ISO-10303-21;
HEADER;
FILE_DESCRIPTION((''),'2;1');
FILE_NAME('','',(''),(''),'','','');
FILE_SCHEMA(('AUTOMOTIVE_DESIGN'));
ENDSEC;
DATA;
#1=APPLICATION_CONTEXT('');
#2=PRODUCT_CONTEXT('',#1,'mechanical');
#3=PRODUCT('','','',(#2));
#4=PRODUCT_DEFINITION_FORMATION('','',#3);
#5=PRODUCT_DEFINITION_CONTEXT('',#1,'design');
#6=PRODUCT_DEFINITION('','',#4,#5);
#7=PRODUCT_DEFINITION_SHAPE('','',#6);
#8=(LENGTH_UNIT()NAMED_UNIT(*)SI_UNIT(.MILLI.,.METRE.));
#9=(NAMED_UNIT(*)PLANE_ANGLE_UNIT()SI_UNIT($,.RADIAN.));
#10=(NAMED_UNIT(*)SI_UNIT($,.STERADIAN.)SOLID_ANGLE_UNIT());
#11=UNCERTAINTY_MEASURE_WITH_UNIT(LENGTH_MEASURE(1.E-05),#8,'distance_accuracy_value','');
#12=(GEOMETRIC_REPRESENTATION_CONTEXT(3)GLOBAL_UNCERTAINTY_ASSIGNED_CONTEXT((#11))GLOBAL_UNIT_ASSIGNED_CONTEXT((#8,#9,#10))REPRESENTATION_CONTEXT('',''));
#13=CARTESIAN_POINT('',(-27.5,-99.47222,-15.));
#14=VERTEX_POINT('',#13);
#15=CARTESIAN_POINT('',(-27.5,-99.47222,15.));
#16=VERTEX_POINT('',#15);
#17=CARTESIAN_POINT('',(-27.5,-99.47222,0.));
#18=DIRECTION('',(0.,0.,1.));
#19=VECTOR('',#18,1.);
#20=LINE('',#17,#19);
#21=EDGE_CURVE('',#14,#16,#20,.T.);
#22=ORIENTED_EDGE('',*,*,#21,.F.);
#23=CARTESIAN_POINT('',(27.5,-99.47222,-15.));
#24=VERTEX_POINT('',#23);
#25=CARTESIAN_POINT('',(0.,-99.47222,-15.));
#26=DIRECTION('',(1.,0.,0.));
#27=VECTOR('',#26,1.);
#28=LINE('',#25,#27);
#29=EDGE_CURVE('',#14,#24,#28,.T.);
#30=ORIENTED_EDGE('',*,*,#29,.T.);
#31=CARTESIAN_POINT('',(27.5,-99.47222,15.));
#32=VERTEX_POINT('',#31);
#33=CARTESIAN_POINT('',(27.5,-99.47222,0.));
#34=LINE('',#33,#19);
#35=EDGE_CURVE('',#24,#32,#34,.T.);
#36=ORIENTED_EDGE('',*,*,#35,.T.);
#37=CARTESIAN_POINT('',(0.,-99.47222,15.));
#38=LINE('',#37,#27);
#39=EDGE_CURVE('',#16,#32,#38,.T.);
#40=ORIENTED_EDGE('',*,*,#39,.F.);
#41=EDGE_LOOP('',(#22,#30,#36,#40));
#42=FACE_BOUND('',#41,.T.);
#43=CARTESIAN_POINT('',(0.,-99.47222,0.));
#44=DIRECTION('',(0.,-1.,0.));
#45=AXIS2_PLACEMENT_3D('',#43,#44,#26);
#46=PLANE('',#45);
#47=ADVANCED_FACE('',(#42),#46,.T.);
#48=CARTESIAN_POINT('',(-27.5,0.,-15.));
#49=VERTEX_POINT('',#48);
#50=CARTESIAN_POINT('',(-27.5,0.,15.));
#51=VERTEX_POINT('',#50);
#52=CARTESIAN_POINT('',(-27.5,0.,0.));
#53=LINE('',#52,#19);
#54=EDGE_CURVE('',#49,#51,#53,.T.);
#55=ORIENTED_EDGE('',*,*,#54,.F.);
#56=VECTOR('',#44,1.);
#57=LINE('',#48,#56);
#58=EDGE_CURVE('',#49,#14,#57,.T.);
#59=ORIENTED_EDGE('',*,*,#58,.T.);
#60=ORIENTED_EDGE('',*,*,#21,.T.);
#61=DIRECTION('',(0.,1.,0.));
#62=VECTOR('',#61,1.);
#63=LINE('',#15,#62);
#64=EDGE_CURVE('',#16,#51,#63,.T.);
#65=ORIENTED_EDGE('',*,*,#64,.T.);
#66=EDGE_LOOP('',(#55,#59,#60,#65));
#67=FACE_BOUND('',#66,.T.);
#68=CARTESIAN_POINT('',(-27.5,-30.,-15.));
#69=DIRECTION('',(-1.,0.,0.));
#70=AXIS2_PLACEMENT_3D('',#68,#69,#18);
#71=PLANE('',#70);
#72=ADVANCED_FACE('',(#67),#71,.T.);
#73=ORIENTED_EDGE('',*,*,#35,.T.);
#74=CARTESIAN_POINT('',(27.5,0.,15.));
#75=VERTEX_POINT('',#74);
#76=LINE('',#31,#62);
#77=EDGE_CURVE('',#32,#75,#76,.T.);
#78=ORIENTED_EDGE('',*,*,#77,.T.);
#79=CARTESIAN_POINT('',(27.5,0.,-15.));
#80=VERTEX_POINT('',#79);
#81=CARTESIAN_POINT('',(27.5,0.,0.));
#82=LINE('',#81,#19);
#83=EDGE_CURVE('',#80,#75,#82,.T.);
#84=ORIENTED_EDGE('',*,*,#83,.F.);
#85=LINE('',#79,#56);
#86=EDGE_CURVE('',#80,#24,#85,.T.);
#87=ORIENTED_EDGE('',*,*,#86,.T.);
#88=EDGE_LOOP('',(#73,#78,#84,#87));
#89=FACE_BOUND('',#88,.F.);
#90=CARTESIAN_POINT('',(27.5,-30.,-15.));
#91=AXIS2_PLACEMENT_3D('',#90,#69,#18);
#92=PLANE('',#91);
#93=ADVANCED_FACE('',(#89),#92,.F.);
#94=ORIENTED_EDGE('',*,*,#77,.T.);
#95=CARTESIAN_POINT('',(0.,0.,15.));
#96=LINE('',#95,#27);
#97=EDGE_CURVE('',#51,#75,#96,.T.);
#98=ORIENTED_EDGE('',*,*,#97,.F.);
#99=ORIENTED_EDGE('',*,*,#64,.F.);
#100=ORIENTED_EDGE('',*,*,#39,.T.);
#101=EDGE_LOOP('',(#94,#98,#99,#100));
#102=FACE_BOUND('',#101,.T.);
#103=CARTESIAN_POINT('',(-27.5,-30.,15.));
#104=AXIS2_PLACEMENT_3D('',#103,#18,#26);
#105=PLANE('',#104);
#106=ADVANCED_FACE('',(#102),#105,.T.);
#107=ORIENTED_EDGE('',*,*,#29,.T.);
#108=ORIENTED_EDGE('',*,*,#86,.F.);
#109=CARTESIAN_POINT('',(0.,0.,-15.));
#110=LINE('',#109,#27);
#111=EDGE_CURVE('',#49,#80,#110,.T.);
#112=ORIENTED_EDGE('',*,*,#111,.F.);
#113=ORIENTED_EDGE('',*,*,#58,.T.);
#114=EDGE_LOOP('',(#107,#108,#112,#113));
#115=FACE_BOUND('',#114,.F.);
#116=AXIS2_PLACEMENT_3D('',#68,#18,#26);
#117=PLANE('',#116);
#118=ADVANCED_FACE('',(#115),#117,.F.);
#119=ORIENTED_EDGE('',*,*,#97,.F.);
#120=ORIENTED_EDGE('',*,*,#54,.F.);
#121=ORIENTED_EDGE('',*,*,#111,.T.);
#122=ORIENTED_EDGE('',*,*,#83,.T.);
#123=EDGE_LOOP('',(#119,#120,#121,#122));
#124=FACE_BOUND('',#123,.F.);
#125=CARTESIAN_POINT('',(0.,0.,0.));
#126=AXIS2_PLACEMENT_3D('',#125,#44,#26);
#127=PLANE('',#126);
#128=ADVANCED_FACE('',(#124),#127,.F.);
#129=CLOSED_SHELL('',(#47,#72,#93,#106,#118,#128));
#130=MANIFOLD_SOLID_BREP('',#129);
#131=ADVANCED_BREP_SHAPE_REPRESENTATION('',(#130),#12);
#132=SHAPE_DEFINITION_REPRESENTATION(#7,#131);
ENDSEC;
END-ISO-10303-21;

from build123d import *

# Parameters (mm, degrees)
F0_W     = 55
F0_H     = 30
F1_DEPTH = 30
F2_DEPTH = 69.4722199


# Not quite as in the source:
# - an extrude ends at something that could not be found from the text; its depth is read off the source's solid


with BuildPart() as f1:
    # F0 (on Front) → F1 (new body)
    with BuildSketch(Plane.XZ):
        Rectangle(F0_W, F0_H)
    extrude(amount=F1_DEPTH)

    # F2 (add, through all): a face of the model
    f2_faces = [f1.faces().sort_by_distance(p)[0] for p in [
        (0, -30, 0),
    ]]
    extrude(f2_faces, amount=F2_DEPTH)


solid = f1.part
